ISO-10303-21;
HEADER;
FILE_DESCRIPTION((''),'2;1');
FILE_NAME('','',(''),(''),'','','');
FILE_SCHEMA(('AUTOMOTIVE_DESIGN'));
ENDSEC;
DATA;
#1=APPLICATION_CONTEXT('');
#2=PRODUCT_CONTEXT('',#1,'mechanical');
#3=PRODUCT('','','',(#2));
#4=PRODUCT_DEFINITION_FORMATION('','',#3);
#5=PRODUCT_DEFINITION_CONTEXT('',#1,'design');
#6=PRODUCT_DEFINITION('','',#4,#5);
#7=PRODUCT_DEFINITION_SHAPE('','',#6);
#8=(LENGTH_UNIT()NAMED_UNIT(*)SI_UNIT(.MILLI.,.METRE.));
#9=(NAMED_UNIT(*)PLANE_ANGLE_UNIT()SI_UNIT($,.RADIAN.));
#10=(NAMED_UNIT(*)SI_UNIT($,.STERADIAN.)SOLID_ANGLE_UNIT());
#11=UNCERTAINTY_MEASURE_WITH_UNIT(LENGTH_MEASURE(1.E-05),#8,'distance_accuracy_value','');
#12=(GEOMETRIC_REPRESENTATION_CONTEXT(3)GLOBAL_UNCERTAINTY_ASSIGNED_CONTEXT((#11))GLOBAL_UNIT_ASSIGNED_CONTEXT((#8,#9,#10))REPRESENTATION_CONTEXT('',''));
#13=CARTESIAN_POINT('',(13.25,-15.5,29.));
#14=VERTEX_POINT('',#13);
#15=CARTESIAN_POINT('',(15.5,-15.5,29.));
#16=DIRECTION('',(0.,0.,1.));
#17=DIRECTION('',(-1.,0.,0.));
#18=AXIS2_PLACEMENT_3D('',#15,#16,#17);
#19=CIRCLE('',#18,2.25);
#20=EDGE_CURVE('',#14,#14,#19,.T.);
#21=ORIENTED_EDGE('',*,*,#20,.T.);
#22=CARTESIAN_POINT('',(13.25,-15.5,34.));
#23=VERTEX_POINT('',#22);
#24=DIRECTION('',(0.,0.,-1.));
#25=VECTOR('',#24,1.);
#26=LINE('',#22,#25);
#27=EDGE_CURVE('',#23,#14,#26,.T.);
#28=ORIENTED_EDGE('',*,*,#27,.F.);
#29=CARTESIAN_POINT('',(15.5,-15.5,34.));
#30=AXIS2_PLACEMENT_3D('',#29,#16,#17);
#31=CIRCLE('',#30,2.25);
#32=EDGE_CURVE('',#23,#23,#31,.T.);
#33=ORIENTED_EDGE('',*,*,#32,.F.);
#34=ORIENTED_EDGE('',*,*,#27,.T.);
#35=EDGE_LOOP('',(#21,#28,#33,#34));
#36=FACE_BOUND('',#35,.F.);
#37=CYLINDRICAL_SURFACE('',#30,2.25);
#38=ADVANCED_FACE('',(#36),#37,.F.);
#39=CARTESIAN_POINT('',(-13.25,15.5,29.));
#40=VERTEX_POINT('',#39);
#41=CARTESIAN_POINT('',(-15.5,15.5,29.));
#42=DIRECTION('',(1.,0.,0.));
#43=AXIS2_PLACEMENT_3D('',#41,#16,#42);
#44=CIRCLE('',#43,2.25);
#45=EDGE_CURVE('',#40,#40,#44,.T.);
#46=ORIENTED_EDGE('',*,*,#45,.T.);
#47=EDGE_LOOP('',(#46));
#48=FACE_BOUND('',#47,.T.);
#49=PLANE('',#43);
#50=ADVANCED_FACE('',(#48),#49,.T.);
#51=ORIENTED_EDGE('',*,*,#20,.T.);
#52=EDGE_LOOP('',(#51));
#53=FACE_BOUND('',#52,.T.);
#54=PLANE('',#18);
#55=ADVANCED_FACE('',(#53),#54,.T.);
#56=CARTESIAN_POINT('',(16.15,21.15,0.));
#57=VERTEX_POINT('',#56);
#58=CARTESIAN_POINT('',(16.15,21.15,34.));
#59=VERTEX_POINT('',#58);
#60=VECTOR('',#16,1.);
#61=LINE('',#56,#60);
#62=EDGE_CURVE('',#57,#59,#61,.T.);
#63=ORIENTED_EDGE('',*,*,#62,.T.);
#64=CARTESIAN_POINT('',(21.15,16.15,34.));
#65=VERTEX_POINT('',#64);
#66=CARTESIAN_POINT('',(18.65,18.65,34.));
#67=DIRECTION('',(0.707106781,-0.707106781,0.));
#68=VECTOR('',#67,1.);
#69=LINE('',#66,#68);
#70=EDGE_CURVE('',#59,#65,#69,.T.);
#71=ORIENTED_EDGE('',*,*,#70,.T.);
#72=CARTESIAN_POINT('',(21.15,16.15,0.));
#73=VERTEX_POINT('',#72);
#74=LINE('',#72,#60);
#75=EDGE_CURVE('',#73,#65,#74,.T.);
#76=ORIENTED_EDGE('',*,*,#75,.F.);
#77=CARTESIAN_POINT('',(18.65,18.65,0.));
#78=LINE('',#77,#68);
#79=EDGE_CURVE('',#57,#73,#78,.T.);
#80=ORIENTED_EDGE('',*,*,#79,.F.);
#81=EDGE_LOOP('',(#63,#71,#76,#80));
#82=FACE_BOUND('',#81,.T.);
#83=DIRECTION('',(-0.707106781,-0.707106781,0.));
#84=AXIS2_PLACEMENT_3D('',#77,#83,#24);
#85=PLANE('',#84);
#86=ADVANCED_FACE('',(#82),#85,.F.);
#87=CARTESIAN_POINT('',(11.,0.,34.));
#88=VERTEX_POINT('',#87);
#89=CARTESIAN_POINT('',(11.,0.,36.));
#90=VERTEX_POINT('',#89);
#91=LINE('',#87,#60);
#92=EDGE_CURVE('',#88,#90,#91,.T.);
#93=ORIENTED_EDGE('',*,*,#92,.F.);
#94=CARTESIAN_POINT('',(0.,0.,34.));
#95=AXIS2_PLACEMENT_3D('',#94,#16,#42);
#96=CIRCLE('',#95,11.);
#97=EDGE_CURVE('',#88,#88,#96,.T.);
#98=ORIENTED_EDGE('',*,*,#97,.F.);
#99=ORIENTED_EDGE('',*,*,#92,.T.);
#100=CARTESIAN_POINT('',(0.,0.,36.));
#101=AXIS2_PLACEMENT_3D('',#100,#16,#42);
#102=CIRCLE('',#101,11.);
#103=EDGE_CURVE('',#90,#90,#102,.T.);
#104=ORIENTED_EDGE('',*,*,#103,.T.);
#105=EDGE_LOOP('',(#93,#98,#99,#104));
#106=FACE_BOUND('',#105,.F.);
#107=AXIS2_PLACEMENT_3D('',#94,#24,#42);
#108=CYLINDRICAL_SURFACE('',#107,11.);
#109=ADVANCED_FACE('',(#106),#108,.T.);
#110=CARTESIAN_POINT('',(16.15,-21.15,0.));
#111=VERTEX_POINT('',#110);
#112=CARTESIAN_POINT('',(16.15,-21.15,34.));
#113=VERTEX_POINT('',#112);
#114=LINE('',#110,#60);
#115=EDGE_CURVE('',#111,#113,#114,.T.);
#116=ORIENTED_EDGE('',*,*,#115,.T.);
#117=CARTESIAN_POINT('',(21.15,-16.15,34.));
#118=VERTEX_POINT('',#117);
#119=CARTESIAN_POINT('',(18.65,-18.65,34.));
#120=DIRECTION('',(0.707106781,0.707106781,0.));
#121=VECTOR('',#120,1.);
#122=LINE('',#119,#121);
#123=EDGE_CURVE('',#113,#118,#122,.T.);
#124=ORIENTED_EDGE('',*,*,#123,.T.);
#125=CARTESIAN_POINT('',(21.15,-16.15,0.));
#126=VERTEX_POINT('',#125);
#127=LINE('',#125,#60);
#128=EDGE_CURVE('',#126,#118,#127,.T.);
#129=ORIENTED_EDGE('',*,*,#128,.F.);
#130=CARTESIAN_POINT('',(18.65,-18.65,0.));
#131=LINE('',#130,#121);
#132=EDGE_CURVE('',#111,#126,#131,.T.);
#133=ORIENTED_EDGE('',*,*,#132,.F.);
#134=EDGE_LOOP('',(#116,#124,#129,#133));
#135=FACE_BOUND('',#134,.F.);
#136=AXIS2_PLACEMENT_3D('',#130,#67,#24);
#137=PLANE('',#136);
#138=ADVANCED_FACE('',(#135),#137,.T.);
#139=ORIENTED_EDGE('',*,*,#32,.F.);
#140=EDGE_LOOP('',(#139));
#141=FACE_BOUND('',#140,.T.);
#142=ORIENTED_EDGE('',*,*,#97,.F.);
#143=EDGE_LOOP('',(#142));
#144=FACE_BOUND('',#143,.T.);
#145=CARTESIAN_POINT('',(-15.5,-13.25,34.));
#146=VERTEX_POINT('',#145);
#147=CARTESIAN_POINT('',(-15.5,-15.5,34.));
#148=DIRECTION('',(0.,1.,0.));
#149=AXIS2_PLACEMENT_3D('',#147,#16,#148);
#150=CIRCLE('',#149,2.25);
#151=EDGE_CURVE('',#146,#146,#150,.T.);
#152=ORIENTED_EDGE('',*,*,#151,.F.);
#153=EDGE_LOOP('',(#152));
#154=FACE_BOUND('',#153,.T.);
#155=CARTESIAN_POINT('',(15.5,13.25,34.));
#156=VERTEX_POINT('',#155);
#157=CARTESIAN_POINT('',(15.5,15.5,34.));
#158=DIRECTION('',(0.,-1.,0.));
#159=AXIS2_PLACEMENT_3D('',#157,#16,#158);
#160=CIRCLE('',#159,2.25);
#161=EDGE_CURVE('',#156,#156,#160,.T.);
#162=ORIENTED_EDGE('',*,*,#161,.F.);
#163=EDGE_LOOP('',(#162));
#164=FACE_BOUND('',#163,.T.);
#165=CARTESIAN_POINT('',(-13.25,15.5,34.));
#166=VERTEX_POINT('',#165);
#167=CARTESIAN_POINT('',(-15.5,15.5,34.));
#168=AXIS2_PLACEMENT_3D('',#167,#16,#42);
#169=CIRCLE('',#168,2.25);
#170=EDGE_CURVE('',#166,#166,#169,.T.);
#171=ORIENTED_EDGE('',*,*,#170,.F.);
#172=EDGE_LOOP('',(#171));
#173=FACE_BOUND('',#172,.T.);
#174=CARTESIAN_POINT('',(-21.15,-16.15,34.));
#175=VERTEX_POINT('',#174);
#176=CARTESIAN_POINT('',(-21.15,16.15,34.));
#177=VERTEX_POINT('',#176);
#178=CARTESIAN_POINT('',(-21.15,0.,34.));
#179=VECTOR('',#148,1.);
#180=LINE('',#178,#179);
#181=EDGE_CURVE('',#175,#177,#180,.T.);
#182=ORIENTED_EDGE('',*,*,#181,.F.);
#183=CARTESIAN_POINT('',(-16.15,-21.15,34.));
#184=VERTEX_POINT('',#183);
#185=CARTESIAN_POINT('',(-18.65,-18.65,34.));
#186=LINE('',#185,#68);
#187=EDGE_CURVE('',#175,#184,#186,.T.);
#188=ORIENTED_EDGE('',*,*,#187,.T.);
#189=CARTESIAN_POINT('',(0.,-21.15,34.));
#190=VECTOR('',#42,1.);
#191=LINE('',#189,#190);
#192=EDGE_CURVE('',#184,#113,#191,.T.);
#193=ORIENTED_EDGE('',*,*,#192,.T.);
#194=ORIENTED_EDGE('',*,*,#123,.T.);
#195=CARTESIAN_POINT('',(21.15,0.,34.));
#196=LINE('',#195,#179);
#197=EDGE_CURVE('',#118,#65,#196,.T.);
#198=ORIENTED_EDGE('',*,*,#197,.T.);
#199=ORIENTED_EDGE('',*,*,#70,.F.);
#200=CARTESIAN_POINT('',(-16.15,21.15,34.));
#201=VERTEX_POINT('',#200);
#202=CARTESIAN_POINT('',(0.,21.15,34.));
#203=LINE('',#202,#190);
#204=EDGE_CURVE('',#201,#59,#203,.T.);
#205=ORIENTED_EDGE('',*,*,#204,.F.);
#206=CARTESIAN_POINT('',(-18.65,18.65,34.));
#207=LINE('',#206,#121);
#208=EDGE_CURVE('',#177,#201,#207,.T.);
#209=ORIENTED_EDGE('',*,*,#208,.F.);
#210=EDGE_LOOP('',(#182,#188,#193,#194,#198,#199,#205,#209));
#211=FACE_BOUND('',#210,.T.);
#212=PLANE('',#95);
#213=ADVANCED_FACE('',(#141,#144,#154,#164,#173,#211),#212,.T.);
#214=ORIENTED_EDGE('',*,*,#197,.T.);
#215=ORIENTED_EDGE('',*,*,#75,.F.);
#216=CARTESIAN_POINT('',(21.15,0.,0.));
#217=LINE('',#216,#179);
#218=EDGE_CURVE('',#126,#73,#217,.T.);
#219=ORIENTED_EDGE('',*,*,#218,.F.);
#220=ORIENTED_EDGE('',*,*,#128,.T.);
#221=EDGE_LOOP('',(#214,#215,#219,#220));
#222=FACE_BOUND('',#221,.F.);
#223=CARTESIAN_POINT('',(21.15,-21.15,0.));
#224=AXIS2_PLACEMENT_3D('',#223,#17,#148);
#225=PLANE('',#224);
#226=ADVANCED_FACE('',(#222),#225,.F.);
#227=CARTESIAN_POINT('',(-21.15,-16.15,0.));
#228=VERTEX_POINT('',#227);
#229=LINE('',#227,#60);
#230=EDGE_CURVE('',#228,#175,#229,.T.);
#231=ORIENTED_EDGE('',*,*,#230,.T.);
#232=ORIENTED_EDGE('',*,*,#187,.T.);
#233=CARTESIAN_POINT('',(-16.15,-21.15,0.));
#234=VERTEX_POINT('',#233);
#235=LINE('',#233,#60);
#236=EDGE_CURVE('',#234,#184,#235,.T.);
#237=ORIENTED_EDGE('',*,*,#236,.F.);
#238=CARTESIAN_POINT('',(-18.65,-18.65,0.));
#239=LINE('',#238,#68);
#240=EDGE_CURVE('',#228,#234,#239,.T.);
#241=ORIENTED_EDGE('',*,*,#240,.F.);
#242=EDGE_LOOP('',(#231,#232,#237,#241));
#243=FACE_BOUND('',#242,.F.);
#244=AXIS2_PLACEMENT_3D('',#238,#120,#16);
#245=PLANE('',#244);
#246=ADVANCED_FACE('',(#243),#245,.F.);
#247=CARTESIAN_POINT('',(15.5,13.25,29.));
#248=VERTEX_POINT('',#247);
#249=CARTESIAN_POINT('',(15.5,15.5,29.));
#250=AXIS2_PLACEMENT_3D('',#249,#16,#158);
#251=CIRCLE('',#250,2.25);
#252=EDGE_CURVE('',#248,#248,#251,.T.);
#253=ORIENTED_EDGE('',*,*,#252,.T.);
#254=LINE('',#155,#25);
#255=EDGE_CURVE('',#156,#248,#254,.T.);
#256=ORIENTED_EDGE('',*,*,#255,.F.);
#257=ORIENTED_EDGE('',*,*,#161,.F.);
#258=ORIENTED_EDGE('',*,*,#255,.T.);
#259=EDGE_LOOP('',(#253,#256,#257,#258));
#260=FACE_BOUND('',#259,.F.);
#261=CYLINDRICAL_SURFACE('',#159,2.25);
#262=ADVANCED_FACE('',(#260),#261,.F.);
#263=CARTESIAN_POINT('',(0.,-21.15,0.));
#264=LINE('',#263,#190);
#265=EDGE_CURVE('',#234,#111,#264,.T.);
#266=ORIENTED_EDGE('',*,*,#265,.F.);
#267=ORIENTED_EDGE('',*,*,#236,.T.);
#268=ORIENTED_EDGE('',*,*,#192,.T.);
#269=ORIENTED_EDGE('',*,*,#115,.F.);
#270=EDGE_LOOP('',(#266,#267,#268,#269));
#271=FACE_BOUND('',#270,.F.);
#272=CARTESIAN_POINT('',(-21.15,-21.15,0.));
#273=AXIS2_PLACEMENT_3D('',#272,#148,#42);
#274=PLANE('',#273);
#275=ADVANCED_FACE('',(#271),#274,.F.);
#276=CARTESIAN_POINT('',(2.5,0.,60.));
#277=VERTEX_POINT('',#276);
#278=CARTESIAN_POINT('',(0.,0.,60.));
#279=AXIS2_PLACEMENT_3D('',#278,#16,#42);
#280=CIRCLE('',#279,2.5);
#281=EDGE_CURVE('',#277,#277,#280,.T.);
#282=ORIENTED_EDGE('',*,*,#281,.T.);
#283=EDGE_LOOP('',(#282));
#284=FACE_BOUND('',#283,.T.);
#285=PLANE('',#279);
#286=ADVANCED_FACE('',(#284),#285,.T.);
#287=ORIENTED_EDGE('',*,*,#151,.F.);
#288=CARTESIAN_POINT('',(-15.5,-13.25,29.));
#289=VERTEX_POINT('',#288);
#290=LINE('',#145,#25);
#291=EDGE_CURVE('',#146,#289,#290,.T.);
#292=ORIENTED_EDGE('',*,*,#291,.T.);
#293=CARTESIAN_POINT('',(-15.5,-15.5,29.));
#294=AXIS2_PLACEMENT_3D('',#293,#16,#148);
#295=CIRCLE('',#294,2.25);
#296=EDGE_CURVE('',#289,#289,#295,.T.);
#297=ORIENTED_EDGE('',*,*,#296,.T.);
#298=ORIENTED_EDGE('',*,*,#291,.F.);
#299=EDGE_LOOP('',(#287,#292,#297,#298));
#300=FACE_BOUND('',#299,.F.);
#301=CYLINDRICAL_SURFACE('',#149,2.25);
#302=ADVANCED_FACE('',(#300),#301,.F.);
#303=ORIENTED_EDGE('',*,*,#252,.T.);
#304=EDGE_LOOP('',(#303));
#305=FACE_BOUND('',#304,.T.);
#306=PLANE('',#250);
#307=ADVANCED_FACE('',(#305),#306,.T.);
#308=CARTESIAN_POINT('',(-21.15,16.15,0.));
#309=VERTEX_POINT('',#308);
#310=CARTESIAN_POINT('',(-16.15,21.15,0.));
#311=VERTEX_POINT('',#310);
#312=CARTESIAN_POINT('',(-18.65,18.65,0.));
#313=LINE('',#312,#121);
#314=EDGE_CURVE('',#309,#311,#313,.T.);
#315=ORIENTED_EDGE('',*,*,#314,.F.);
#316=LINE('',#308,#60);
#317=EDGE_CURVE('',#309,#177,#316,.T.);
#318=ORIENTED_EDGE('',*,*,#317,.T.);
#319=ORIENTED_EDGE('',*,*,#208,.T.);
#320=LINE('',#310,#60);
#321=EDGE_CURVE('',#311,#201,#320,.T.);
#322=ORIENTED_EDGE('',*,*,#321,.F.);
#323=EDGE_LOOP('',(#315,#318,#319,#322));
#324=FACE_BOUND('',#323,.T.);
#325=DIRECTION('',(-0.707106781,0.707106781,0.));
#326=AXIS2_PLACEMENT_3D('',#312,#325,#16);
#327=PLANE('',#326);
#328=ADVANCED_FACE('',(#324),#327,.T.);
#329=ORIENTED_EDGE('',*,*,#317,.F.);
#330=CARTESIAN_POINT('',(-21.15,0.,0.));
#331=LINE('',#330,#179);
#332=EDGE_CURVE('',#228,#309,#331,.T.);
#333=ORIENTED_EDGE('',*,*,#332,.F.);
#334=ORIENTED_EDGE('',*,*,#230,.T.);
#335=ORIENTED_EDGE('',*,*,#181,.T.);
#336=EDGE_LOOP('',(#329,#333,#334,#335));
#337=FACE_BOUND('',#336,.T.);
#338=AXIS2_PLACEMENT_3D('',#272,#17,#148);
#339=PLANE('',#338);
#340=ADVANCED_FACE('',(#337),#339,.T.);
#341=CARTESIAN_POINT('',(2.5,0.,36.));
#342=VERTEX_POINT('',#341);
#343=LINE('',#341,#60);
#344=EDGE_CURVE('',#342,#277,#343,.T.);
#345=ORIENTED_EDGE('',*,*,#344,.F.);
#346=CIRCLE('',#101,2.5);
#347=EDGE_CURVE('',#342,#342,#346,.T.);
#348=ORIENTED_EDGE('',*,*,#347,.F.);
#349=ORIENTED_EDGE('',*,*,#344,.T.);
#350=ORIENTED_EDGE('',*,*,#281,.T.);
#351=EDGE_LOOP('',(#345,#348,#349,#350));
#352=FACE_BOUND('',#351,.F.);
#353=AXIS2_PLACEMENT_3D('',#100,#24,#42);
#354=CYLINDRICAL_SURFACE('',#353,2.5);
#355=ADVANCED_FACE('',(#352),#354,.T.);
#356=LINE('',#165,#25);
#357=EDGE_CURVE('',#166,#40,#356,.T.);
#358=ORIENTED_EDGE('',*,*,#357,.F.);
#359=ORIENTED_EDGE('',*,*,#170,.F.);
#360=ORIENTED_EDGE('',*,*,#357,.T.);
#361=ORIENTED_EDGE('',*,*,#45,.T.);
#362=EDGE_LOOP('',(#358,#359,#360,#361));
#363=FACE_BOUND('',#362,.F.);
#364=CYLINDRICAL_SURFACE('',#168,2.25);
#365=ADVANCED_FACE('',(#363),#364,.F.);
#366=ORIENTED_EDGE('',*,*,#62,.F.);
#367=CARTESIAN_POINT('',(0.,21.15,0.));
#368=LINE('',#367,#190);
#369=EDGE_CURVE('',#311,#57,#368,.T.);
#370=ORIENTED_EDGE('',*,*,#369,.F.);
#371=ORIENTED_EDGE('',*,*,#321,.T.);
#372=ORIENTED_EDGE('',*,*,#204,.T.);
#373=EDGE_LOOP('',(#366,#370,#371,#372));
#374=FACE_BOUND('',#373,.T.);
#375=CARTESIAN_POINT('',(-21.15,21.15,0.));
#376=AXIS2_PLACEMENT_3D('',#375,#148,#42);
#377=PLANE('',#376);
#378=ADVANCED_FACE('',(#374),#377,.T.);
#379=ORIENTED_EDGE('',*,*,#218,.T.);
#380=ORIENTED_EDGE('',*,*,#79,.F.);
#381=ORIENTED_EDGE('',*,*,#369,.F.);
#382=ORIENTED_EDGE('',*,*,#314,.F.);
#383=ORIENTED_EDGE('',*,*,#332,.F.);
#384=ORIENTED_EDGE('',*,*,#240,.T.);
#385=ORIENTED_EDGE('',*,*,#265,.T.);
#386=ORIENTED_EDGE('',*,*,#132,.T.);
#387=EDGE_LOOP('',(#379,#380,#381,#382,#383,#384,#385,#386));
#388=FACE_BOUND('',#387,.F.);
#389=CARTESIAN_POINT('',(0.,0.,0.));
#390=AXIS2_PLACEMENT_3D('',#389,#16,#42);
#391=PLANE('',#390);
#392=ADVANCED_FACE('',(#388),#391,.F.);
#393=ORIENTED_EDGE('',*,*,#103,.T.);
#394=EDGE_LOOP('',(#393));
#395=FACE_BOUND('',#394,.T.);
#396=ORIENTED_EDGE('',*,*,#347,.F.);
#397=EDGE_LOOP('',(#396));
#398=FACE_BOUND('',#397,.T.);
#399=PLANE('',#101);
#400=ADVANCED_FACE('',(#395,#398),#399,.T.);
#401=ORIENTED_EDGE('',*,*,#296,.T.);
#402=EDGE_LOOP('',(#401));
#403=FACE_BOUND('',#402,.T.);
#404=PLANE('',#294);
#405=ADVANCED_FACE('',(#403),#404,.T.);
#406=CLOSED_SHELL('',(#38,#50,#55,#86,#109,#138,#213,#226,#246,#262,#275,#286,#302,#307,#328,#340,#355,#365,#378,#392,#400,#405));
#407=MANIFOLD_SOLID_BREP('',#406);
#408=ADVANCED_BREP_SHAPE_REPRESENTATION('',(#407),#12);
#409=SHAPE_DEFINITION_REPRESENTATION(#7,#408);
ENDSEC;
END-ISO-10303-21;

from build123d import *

# Parameters (mm, degrees)
F0_W            = 42.3
F0_H            = 42.3
F1_DEPTH        = 34
F2_R            = 11
F3_DEPTH        = 2
F4_R            = 2.5
F5_DEPTH        = 24
F6_R            = 2.25
F7_DEPTH        = 5
F7_COPIES_COUNT = 4
F8_SIZE         = 5


# Not quite as in the source:
# - a pattern or mirror of a feature is missing from the dataset's text; its kind, count and spacing are read off the source's solid


with BuildPart() as f1:
    # F0 (on Top) → F1 (new body)
    with BuildSketch(Plane.XY):
        Rectangle(F0_W, F0_H)
    extrude(amount=F1_DEPTH)

    # F2 (on face) → F3 (join)
    with BuildSketch(Plane.XY.offset(34)):
        Circle(F2_R)
    extrude(amount=F3_DEPTH)

    # F4 (on face) → F5 (join)
    with BuildSketch(Plane.XY.offset(36)):
        Circle(F4_R)
    extrude(amount=F5_DEPTH)

    # F6 (on face) → F7 (cut)
    with BuildSketch(Plane.XY.offset(34)):
        with Locations((-15.5, 15.5)):
            Circle(F6_R)
    f7 = extrude(amount=-F7_DEPTH, mode=Mode.SUBTRACT)

    # F7_copies: F7 ×4 about axis
    f7_copies_axis = Axis((0, 0, 0), (0, 0, 1))
    for i in range(1, F7_COPIES_COUNT):
        add(f7.rotate(f7_copies_axis, i * 360 / F7_COPIES_COUNT), mode=Mode.SUBTRACT)

    # F8
    f8_edges = [f1.edges().sort_by_distance(p)[0] for p in [
        (-21.15, -21.15, 17),
        (-21.15, 21.15, 17),
        (21.15, 21.15, 17),
        (21.15, -21.15, 17),
    ]]
    chamfer(f8_edges, length=F8_SIZE)


solid = f1.part
